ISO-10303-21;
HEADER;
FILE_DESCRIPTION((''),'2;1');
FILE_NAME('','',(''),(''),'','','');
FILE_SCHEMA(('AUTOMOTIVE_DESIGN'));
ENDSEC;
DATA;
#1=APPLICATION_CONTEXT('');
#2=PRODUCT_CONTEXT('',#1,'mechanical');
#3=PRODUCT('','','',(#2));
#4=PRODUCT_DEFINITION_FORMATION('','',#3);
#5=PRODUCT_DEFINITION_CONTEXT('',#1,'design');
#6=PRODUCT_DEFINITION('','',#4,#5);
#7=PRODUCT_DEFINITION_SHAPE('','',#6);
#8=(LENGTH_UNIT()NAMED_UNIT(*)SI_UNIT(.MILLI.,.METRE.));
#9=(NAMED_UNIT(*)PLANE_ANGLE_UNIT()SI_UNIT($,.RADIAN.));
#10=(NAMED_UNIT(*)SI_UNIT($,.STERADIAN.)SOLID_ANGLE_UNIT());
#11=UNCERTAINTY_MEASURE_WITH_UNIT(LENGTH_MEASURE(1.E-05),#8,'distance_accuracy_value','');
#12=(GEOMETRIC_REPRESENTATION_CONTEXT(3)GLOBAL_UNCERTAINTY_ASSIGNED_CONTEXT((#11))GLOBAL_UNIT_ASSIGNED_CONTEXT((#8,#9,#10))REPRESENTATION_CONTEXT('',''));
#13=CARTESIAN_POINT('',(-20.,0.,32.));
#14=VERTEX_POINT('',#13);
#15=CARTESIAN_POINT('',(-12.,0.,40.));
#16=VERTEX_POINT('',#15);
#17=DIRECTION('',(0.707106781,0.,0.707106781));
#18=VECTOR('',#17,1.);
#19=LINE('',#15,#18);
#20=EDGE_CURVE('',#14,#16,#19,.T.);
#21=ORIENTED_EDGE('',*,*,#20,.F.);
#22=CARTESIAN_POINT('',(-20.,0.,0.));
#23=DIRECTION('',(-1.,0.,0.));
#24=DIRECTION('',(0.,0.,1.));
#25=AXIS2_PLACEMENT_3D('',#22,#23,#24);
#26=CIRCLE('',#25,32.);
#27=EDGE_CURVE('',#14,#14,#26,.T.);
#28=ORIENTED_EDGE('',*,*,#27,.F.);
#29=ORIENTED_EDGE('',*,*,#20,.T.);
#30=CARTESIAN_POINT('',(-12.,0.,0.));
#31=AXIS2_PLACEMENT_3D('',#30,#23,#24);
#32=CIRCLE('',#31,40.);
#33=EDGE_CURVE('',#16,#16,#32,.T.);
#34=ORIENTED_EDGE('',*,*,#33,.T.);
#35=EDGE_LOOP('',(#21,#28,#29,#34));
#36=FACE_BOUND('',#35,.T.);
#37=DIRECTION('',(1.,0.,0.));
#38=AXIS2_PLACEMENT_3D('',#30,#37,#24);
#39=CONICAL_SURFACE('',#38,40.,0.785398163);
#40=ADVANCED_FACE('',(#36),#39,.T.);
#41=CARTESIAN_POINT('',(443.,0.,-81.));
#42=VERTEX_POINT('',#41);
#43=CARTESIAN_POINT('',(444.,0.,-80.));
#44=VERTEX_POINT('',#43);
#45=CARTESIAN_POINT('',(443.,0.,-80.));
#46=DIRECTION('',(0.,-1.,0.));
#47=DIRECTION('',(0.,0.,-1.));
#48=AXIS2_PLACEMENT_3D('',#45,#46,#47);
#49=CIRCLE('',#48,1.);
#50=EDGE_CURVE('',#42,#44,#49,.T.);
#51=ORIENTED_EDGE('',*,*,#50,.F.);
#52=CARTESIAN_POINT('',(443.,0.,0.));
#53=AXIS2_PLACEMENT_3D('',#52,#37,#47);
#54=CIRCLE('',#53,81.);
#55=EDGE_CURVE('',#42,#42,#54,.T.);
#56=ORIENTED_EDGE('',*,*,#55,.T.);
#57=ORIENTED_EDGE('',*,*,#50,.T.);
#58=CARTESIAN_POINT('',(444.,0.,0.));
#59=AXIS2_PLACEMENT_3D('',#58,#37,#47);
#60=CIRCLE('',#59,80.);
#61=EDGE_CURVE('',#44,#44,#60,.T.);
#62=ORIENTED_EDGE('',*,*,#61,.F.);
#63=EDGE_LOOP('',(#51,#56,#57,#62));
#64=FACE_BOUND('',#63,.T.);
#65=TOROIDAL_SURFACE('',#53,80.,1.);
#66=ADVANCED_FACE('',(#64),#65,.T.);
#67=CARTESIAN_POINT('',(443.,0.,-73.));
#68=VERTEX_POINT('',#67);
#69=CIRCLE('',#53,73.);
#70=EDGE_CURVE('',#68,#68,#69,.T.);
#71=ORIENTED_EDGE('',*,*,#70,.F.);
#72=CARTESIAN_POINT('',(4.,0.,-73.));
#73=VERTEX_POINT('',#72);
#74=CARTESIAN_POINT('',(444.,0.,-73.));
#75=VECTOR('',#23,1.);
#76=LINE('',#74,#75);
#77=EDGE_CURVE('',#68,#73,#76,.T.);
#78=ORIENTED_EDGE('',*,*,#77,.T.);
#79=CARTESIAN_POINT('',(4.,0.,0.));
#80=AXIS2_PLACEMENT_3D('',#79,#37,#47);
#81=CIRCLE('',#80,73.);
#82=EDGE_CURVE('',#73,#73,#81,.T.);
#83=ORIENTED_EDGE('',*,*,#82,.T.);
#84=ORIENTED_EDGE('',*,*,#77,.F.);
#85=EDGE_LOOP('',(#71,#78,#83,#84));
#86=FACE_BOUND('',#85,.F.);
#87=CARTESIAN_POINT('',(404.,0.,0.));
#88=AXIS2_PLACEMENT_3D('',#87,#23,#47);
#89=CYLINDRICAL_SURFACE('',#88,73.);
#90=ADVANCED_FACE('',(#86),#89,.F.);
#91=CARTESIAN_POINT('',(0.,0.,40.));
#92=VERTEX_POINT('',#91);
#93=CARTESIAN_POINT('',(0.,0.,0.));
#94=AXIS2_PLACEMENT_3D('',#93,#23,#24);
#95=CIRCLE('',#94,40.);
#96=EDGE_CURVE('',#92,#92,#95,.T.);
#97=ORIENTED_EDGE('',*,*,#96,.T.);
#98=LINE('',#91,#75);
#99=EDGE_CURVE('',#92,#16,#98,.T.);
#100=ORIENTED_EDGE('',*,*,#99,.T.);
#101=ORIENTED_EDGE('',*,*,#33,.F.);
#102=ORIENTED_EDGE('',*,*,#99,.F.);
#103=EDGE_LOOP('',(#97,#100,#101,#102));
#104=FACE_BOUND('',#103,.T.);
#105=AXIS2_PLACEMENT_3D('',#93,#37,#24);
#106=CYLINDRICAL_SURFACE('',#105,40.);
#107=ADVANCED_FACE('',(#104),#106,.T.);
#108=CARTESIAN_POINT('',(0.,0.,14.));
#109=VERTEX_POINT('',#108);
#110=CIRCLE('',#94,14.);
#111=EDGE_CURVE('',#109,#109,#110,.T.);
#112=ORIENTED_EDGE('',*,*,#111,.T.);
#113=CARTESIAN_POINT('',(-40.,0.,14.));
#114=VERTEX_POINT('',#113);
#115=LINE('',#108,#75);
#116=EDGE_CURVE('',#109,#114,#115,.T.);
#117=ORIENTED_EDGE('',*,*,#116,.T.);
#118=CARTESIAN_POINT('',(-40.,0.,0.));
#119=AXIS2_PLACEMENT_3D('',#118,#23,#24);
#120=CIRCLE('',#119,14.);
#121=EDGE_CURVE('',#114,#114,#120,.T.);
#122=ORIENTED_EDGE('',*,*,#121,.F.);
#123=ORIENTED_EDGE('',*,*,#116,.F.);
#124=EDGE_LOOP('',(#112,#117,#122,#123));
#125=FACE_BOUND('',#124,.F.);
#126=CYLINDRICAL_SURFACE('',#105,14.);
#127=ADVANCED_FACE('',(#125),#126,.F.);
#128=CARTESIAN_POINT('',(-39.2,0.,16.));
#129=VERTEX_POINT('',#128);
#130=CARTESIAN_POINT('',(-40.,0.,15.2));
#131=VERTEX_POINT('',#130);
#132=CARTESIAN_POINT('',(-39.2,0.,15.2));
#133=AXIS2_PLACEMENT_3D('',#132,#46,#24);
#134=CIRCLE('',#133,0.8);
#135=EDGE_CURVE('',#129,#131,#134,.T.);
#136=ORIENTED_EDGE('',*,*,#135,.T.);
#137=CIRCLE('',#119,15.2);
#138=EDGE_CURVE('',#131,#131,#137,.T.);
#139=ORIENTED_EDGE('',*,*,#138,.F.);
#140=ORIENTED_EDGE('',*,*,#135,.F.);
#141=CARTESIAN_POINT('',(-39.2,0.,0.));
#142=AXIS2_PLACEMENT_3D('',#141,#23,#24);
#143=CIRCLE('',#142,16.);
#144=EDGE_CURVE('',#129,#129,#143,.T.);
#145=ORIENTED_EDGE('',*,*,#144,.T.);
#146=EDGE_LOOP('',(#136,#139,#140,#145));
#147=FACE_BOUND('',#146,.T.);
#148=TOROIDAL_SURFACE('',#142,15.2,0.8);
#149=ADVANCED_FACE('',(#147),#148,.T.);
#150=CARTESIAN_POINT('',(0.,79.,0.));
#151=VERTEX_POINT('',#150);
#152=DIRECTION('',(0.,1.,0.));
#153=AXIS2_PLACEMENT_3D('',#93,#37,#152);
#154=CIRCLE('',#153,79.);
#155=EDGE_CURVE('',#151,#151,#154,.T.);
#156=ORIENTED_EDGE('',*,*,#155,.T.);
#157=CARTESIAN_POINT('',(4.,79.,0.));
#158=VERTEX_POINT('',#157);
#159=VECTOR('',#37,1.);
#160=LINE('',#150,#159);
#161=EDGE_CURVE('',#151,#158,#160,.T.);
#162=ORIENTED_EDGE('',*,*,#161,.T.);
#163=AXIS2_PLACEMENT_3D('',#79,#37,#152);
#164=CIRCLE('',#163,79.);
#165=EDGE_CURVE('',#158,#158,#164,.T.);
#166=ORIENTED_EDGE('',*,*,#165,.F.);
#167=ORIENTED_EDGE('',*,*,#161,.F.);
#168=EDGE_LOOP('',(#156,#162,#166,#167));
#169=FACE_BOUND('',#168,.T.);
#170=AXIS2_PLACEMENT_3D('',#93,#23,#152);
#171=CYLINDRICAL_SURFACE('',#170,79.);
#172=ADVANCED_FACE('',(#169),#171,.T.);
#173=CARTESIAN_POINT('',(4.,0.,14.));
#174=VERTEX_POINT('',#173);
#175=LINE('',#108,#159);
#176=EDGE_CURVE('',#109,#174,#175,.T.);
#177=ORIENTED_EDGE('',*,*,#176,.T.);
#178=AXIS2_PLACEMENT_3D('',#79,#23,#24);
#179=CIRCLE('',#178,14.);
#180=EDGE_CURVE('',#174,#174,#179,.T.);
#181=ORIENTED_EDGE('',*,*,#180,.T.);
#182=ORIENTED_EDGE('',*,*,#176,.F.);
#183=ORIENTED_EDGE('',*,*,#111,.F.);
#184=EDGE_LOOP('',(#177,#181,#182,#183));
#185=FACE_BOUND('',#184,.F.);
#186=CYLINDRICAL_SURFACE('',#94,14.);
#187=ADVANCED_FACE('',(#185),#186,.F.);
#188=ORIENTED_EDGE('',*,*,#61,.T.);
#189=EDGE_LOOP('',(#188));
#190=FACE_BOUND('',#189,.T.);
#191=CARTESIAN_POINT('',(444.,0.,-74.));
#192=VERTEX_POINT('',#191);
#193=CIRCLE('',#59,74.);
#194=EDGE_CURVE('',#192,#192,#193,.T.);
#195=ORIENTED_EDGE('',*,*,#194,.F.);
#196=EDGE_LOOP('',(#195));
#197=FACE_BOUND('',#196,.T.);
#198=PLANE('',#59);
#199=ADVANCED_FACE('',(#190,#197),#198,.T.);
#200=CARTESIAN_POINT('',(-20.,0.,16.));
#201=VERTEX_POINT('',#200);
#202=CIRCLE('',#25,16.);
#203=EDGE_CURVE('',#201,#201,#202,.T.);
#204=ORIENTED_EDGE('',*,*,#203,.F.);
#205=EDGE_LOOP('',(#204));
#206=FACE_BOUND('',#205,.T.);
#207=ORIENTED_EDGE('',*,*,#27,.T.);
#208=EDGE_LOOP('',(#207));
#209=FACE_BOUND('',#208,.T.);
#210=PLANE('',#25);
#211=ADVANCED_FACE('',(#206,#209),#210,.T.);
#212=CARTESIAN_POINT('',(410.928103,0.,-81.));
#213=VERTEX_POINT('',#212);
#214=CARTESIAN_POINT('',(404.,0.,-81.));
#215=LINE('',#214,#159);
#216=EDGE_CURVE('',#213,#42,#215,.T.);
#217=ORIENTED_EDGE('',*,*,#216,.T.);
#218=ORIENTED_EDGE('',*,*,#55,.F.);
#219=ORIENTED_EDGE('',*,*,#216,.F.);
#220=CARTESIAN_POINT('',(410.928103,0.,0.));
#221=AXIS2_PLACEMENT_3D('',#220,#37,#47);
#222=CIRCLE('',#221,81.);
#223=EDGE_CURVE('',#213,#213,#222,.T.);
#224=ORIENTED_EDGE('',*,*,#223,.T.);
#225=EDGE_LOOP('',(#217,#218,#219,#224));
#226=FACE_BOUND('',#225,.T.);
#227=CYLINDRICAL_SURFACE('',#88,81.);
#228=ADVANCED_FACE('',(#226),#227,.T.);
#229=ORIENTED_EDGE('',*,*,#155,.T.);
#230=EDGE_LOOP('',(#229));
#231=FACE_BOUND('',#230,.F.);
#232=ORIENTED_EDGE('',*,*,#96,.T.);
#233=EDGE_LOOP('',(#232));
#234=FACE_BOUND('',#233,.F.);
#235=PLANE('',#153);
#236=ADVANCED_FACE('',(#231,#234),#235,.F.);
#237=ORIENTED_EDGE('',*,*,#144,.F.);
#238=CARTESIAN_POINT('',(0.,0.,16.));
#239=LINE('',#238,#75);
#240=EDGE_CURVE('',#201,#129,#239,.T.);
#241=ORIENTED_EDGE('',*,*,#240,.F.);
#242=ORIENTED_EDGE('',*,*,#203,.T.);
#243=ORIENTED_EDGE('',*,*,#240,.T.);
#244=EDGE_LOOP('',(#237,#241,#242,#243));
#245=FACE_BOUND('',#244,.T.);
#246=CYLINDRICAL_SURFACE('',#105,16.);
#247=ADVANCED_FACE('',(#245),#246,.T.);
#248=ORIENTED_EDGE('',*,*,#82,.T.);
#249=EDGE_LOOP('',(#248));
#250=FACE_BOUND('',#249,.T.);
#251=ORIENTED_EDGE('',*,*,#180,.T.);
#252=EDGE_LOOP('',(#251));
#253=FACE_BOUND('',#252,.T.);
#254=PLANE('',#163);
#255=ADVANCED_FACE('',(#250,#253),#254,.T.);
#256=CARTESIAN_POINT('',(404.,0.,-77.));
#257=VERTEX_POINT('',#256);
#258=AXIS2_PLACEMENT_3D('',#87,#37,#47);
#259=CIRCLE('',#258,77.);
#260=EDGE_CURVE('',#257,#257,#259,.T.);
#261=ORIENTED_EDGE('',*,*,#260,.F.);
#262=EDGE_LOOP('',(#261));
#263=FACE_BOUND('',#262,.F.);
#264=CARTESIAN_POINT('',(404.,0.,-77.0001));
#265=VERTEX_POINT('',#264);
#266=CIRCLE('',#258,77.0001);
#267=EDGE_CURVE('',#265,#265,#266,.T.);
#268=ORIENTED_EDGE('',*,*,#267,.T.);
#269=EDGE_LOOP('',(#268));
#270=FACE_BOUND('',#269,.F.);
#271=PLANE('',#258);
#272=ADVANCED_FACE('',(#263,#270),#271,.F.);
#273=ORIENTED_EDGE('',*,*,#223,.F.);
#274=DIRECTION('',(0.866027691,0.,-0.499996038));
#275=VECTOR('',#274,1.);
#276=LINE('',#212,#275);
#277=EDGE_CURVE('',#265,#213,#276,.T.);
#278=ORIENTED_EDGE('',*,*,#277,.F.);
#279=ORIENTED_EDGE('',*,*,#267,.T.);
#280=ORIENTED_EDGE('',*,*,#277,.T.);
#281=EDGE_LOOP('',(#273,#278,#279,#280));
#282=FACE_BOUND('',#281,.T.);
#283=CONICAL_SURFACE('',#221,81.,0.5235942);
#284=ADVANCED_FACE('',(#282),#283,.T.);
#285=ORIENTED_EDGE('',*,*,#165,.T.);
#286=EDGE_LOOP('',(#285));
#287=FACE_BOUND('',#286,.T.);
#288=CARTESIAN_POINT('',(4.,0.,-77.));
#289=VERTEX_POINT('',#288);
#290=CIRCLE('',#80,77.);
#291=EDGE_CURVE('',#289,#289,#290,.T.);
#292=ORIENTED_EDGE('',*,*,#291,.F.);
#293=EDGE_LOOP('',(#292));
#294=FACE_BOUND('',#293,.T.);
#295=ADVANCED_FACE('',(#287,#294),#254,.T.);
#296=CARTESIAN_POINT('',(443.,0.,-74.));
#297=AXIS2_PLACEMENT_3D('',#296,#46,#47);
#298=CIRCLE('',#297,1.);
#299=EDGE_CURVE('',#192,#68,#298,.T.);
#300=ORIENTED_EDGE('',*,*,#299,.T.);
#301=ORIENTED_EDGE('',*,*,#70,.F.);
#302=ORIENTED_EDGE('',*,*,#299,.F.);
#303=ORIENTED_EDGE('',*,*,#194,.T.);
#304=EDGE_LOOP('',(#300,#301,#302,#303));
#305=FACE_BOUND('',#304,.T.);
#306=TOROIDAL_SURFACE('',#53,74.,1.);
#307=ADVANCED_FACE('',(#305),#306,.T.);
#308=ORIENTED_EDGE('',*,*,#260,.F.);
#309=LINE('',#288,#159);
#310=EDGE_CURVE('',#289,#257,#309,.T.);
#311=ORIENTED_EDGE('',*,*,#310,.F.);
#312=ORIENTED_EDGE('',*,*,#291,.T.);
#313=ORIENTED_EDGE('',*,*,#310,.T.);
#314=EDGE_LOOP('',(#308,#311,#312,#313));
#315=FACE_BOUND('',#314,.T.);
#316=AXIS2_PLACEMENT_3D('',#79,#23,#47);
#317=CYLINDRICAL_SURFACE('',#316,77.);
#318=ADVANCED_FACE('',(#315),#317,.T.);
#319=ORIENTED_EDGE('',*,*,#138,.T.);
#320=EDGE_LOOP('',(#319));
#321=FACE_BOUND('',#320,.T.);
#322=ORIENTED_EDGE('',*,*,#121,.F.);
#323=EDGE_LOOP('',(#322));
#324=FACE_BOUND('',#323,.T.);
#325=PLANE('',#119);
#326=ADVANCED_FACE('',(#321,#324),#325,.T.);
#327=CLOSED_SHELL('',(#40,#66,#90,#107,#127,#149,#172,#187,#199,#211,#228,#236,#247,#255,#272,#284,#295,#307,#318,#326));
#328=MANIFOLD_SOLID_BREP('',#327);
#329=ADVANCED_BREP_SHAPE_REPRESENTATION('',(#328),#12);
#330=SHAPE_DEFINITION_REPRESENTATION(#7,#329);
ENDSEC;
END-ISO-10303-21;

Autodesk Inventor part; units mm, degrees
ref_plane "YZ Plane" through (0, 0, 0) normal (1, 0, 0) x (0, 1, 0)
ref_plane "XZ Plane" through (0, 0, 0) normal (0, 1, 0) x (-1, 0, 0)
sketch "Sketch3" plane through (0, 0, 0) normal (1, 0, 0) x (0, 1, 0)
  circle A0 centre (0, 0) radius 79
extrude "Extrusion2" add sketch "Sketch3" along normal blind 4
sketch "Sketch4" plane through (4, 0, 0) normal (1, 0, 0) x (0, 0, -1)
  circle A0 centre (0, 0) radius 77
  circle A1 centre (0, 0) radius 73
extrude "Extrusion3" add sketch "Sketch4" along normal blind 400
ref_plane "Work Plane1" through (404, 0, 0) normal (1, 0, 0) x (0, 0, -1)
sketch "Sketch5" plane through (404, 0, 0) normal (1, 0, 0) x (0, 0, -1)
  circle A0 centre (0, 0) radius 81
  circle A1 centre (0, 0) radius 73
extrude "Extrusion4" add sketch "Sketch5" along normal blind 40
chamfer "Chamfer1" distance 4 angle 60 1 edges at (404, 0, 81) measured on face at (404, 0, 78.1669)
sketch "Sketch7" plane through (0, 0, 0) normal (-1, 0, 0) x (0, 0, 1)
  circle A0 centre (0, 0) radius 16
  circle A1 centre (0, 0) radius 40
  circle A2 centre (0, 0) radius 14
extrude "Extrusion5" add sketch "Sketch7" along normal blind 20 contours A1
extrude "Extrusion6" add sketch "Sketch7" along normal blind 40 contours A0
fillet "Fillet1" radius 0.8 1 edges at (-40, 0, -16)
chamfer "Chamfer2" distance 8 angle 45 1 edges at (-20, 0, -40)
fillet "Fillet2" radius 1 2 edges at (444, 0, 81) (444, 0, 73)
extrude "Extrusion7" cut sketch "Sketch7" against normal through all contours A2
sketch "Sketch8" plane through (0, 0, 0) normal (-1, 0, 0) x (0, 0, 1)
  point P0 (0, 0)
properties part number "GuiderTube"
